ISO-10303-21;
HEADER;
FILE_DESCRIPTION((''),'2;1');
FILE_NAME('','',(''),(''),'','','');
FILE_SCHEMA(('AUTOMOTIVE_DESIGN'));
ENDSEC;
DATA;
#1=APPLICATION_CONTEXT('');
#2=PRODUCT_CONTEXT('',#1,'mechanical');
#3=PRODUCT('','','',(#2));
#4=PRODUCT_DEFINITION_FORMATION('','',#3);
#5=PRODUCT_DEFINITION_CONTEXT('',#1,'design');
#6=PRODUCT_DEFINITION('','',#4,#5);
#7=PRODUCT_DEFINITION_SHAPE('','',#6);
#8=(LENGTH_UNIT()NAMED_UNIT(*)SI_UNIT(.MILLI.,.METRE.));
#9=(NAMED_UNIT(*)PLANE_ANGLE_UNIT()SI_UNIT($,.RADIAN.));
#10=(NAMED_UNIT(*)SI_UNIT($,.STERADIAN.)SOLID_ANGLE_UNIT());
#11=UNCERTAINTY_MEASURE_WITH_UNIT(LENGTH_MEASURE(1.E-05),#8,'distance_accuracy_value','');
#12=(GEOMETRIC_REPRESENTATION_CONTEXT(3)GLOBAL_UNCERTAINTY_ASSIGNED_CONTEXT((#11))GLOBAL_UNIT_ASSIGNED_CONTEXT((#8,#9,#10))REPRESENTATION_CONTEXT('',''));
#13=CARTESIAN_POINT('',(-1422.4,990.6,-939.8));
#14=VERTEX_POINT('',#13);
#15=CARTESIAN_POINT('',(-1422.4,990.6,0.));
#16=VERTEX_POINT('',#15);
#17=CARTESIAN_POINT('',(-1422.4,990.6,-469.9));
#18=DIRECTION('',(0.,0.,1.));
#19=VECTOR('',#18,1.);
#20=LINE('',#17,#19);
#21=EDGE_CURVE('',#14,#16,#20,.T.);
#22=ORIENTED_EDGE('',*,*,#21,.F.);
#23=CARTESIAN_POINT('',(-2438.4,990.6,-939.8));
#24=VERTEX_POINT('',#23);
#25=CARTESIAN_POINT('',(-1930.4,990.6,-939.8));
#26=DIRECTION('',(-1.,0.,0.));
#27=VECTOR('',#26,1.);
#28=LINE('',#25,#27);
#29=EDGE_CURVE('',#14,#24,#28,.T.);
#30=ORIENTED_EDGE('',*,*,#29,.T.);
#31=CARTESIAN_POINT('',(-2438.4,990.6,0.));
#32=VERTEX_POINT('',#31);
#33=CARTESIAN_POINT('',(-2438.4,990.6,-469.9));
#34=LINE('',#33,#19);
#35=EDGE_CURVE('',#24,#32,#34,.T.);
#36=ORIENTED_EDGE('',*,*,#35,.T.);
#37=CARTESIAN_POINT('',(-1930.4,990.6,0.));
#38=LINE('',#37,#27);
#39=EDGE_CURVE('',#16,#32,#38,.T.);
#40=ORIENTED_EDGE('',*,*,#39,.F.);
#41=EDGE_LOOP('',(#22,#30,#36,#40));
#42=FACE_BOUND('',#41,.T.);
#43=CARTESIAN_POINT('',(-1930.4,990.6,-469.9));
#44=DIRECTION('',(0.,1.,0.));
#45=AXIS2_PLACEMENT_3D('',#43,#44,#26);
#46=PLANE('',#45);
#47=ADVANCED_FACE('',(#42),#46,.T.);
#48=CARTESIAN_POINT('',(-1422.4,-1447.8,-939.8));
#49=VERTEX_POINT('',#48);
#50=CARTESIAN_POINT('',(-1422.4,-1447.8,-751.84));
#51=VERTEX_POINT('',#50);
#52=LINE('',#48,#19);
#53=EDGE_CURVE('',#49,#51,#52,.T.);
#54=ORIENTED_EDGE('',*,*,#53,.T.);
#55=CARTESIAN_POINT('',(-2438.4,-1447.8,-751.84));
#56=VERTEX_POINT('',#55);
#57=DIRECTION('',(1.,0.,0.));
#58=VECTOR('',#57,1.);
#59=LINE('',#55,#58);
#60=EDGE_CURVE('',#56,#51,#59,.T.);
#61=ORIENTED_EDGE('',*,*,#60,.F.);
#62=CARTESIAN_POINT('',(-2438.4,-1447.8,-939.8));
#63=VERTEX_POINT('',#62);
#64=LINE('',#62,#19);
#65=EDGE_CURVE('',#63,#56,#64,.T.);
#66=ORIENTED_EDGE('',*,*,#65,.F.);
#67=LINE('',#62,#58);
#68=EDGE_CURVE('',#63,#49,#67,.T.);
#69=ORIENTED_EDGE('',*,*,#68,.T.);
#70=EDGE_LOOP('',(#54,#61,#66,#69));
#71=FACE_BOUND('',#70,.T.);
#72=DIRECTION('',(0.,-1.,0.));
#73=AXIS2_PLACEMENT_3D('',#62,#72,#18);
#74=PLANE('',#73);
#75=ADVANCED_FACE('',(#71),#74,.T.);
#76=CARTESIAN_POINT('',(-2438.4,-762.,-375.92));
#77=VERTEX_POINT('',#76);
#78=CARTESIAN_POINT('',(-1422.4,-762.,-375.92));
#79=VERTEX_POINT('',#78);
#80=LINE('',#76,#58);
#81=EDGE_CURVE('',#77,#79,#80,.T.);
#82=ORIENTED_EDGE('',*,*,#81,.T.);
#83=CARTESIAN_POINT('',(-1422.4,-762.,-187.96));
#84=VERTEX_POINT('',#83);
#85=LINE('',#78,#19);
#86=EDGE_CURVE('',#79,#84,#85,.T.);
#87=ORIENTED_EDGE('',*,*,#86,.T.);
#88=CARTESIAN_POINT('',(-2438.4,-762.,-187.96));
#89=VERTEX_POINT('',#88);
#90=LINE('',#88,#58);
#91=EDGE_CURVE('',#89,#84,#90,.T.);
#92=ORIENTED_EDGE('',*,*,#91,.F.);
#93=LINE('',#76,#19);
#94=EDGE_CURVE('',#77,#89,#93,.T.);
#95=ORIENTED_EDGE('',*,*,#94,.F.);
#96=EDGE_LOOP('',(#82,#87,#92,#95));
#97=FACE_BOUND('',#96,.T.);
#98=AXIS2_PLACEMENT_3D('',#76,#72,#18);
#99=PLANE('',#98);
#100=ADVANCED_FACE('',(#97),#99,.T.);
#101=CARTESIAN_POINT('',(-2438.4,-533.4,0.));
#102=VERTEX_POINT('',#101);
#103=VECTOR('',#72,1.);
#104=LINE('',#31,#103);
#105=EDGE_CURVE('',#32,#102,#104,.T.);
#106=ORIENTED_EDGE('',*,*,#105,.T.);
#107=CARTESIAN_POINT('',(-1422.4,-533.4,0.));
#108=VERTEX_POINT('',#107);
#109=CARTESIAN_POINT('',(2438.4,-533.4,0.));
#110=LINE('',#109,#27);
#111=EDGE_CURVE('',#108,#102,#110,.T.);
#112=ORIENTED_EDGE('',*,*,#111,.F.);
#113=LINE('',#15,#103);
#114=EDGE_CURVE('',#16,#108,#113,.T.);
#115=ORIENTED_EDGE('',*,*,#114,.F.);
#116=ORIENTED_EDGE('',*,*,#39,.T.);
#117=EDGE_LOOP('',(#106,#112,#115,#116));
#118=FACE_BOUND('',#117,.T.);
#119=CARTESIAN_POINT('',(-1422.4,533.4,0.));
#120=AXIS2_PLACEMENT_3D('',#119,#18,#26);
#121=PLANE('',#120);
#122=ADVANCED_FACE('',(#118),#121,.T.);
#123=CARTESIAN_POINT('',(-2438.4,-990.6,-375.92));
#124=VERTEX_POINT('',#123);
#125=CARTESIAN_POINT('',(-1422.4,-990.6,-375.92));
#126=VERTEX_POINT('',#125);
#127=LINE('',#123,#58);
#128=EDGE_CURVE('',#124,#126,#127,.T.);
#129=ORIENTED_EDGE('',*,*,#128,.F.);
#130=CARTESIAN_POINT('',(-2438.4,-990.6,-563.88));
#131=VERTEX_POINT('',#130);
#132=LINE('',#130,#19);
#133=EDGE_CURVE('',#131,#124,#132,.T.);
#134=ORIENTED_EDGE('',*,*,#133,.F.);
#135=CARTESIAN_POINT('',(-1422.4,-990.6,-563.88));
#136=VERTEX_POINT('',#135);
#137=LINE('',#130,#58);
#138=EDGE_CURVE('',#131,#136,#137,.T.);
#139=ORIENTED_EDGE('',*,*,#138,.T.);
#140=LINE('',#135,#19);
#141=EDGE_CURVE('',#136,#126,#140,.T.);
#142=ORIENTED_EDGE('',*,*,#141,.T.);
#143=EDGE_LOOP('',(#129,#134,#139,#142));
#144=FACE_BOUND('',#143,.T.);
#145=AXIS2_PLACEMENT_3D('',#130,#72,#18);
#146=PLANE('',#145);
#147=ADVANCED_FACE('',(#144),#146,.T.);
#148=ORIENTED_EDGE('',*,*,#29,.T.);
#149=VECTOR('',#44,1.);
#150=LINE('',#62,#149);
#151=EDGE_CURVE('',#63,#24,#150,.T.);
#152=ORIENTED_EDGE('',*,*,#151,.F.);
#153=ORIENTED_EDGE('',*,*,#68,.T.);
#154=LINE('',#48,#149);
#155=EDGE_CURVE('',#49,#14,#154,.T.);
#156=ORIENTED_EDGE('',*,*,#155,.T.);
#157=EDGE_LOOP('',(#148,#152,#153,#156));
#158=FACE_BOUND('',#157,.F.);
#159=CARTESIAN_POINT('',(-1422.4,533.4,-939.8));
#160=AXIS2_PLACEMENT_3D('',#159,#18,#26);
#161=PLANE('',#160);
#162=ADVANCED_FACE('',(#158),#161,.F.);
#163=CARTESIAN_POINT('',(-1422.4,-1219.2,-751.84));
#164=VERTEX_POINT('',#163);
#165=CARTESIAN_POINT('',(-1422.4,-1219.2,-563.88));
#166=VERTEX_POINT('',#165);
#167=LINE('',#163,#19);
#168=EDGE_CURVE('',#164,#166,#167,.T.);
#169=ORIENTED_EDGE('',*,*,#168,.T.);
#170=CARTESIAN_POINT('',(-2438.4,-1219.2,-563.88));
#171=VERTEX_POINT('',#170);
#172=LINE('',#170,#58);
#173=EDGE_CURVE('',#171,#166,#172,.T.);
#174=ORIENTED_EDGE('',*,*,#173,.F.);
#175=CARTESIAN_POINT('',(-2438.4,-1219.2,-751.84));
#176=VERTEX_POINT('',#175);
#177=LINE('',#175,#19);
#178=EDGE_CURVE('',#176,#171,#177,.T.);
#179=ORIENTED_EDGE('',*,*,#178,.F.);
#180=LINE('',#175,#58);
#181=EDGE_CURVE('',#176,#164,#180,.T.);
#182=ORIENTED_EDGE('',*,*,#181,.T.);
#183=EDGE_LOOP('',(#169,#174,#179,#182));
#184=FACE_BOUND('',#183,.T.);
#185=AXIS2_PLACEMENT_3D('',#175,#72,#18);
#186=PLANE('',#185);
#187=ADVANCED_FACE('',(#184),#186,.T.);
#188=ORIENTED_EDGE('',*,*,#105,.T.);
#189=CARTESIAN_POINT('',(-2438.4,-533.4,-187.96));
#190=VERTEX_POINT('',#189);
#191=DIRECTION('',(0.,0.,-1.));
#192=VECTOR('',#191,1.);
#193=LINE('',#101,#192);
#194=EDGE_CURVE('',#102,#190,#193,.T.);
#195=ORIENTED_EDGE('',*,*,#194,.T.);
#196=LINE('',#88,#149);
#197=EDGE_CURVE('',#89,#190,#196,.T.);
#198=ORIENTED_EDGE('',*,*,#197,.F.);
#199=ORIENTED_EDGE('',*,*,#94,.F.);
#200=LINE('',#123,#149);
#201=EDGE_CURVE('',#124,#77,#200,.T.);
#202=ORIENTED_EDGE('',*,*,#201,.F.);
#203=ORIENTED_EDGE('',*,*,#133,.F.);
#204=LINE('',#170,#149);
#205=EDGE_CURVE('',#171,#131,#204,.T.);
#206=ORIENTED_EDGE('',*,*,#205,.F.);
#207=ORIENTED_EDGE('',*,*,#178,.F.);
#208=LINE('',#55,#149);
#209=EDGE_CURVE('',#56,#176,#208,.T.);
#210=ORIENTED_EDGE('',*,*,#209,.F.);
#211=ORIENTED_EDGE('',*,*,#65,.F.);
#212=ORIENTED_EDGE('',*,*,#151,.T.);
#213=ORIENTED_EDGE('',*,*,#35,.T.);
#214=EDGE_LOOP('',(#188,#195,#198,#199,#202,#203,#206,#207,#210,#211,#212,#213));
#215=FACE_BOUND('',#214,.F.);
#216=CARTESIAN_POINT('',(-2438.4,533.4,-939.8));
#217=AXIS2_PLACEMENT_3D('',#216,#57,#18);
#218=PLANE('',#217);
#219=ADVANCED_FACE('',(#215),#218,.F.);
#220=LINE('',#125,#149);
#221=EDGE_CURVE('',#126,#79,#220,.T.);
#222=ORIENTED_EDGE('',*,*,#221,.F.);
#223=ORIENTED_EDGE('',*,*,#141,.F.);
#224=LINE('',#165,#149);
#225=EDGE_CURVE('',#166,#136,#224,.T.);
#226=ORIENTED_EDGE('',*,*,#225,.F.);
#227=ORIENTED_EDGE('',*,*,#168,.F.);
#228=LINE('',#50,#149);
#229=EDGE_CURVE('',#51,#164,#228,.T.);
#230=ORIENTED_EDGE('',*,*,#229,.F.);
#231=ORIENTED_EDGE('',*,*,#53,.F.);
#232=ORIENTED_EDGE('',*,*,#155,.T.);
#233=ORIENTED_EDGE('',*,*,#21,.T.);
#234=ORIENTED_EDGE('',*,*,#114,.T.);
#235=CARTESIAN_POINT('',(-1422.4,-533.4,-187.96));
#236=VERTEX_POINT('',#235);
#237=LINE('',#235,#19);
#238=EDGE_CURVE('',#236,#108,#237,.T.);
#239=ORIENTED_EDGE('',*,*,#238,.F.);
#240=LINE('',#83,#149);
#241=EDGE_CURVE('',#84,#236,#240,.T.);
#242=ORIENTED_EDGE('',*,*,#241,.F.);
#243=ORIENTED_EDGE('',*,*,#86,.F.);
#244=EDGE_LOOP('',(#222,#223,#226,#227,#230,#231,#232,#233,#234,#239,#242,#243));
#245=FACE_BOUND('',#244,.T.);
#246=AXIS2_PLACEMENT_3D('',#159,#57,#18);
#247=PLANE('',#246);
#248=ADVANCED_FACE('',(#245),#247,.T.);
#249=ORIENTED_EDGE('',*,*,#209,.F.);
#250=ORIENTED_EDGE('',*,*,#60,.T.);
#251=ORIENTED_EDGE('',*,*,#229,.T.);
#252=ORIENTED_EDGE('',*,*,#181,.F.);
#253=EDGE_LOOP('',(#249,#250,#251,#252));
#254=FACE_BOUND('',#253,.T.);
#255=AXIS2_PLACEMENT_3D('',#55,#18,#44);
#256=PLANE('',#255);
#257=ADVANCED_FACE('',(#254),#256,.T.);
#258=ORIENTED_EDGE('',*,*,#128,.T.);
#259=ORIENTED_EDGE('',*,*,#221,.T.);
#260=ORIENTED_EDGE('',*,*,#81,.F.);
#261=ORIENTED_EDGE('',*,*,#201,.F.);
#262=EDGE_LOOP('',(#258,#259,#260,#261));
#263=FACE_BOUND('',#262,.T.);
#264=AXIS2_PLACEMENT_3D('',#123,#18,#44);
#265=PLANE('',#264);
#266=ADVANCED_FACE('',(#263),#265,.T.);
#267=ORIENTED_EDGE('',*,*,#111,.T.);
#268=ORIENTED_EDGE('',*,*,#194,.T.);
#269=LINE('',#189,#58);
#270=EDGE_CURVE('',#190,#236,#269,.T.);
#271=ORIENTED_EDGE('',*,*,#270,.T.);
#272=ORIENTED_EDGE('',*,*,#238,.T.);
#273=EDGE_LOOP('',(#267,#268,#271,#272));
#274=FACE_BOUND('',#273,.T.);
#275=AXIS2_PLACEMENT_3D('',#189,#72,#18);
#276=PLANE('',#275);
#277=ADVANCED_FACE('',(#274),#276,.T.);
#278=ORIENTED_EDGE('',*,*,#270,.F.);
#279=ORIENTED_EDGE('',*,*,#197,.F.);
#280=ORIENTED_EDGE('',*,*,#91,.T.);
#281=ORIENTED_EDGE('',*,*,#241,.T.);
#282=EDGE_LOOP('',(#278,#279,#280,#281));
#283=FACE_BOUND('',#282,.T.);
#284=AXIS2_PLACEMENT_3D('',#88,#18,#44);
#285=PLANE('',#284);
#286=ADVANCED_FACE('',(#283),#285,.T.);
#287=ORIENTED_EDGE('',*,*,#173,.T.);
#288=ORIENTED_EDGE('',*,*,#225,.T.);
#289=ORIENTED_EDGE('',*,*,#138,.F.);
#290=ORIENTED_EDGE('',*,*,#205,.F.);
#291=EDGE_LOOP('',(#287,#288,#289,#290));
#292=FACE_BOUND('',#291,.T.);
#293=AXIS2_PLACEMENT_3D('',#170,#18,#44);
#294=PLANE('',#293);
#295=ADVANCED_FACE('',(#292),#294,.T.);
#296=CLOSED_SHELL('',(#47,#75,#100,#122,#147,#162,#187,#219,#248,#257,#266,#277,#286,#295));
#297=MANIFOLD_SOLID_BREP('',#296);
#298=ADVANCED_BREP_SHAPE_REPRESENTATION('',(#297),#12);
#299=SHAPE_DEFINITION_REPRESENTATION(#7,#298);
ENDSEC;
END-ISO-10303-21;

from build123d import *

# Parameters (mm, degrees)
F0_W      = 4876.8
F0_H      = 1066.8
F1_DEPTH  = 101.6
F3_DEPTH  = 1016
F7_W      = 3860.8
F7_H      = 1066.8
F8_DEPTH  = 458.42061
F9_W      = 1016
F9_H      = 939.8
F10_DEPTH = 457.2


# Not quite as in the source:
# - a feature of the source that left no trace in its solid (it failed there, or was rolled back) is left out


with BuildPart() as f1:
    # F0 (on Top) → F1 (new body)
    with BuildSketch(Plane.XY):
        Rectangle(F0_W, F0_H)
    extrude(amount=-F1_DEPTH)

    # F2 (on face) → F3 (join)
    with BuildSketch(Plane(origin=(-2438.4, 0, 0), x_dir=(0, -1, 0), z_dir=(-1, 0, 0))):
        Polygon((533.4, -187.96), (533.4, 0), (304.8, 0), (-533.4, 0), (-533.4, -939.8), (304.8, -939.8), (1447.8, -939.8), (1447.8, -751.84), (1219.2, -751.84), (1219.2, -563.88), (990.6, -563.88), (990.6, -375.92), (762, -375.92), (762, -187.96), align=None)
    extrude(amount=-F3_DEPTH)

    # F7 (on face) → F8 (cut)
    with BuildSketch(Plane.XY):
        with Locations((508, 0)):
            Rectangle(F7_W, F7_H)
    extrude(amount=-F8_DEPTH, mode=Mode.SUBTRACT)

    # F9 (on face) → F10 (join)
    with BuildSketch(Plane(origin=(0, 533.4, 0), x_dir=(-1, 0, 0), z_dir=(0, 1, 0))):
        with Locations((1930.4, -469.9)):
            Rectangle(F9_W, F9_H)
    extrude(amount=F10_DEPTH)


solid = f1.part
